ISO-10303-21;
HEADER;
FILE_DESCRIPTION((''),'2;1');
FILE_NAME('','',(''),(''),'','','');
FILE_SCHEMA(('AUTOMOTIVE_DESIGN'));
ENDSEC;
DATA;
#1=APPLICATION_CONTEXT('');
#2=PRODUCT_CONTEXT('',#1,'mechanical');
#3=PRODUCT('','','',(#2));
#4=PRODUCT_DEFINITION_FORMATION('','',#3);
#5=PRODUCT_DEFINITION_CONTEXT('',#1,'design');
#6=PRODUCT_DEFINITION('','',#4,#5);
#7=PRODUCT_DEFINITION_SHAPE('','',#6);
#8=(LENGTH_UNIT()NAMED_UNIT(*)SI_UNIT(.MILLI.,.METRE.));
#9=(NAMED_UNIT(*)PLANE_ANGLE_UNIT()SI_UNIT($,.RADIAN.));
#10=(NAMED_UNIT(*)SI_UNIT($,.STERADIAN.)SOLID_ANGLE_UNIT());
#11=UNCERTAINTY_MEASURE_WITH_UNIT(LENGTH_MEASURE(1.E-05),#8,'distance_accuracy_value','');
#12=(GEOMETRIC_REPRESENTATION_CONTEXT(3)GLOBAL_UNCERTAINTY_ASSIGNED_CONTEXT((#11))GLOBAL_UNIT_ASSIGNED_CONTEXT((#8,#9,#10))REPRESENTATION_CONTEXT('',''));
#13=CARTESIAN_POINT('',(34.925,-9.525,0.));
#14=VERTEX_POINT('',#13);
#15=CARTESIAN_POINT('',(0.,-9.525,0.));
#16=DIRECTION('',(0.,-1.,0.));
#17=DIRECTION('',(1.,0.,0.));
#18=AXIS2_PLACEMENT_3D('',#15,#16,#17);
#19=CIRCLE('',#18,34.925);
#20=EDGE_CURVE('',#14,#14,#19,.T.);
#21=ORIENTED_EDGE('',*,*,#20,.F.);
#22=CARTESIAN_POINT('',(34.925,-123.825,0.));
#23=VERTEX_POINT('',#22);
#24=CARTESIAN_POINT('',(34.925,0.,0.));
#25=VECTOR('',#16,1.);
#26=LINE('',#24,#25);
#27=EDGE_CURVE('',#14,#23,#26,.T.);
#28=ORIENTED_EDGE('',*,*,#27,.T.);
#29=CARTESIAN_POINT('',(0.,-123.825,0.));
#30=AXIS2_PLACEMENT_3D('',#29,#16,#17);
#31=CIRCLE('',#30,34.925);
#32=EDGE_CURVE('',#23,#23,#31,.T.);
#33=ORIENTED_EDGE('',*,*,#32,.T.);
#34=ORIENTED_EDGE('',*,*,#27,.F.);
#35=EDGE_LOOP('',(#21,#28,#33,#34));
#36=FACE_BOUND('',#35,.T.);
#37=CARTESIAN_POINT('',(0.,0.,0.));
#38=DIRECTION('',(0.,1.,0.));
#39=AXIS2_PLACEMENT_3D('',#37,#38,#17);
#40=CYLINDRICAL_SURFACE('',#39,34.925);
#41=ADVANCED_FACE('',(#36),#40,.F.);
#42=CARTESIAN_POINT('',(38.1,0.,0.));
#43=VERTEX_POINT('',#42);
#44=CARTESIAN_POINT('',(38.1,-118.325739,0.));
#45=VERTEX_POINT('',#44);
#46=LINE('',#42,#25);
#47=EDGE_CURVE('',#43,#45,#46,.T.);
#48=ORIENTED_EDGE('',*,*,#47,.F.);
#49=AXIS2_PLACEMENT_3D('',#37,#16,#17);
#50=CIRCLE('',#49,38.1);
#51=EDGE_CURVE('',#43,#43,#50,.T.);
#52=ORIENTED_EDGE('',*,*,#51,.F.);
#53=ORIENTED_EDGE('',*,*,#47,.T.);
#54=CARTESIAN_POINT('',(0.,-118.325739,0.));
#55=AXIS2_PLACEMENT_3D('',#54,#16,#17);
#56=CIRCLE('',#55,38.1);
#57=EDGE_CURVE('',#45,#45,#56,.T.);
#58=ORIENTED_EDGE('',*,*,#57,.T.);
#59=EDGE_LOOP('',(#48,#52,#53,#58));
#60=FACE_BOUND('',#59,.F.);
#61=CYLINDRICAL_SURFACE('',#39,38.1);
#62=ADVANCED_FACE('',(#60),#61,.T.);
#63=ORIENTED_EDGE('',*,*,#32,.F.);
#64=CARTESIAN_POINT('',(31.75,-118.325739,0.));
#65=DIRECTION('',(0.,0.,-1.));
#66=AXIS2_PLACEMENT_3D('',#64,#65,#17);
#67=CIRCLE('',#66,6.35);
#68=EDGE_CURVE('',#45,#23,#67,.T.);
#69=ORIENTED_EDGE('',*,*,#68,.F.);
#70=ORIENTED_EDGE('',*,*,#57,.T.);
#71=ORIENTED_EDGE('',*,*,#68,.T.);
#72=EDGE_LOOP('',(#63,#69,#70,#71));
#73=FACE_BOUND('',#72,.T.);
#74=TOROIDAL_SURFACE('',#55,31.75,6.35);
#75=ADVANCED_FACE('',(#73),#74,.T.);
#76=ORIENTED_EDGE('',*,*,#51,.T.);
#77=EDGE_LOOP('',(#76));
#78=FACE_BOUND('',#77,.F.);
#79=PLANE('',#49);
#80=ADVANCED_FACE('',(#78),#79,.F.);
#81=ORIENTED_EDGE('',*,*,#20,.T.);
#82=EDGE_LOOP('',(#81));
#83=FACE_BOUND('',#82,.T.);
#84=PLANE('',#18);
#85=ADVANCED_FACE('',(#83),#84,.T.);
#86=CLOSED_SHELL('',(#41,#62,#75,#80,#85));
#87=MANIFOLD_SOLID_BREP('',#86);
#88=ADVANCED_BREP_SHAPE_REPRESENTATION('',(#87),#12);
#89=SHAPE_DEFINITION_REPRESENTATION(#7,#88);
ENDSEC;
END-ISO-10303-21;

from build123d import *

# Parameters (mm, degrees)
F0_R     = 34.925
F1_DEPTH = 9.525
F0_R_2   = 38.1
F2_DEPTH = 123.825


# Not quite as in the source:
# - a fillet or chamfer that OpenCascade refuses, or shapes differently, is made with other operations: its cross-section is extruded or revolved along the edge and cut away or added


with BuildPart() as f1:
    # F0 (on Front) → F1 (new body)
    with BuildSketch(Plane.XZ):
        Circle(F0_R)
    extrude(amount=F1_DEPTH)

    # F0 (on Front) → F2 (join)
    with BuildSketch(Plane.XZ):
        Circle(F0_R_2)
        Circle(F0_R, mode=Mode.SUBTRACT)
    extrude(amount=F2_DEPTH)

    # F3: fillet of radius 6.35 on 1 edges, made by hand

    # F3_s1 → F3_t2 (revolve, cut)
    with BuildSketch(Plane.XY):
        with BuildLine():
            ThreePointArc((38.1, -118.325738686), (37.249261314, -121.500738686), (34.925, -123.825))
            Line((34.925, -123.825), (38.1, -123.825))
            Line((38.1, -123.825), (38.1, -118.325738686))
        make_face()
    revolve(axis=Axis((0, -123.825, 0), (0, -1, 0)), mode=Mode.SUBTRACT)


solid = f1.part
